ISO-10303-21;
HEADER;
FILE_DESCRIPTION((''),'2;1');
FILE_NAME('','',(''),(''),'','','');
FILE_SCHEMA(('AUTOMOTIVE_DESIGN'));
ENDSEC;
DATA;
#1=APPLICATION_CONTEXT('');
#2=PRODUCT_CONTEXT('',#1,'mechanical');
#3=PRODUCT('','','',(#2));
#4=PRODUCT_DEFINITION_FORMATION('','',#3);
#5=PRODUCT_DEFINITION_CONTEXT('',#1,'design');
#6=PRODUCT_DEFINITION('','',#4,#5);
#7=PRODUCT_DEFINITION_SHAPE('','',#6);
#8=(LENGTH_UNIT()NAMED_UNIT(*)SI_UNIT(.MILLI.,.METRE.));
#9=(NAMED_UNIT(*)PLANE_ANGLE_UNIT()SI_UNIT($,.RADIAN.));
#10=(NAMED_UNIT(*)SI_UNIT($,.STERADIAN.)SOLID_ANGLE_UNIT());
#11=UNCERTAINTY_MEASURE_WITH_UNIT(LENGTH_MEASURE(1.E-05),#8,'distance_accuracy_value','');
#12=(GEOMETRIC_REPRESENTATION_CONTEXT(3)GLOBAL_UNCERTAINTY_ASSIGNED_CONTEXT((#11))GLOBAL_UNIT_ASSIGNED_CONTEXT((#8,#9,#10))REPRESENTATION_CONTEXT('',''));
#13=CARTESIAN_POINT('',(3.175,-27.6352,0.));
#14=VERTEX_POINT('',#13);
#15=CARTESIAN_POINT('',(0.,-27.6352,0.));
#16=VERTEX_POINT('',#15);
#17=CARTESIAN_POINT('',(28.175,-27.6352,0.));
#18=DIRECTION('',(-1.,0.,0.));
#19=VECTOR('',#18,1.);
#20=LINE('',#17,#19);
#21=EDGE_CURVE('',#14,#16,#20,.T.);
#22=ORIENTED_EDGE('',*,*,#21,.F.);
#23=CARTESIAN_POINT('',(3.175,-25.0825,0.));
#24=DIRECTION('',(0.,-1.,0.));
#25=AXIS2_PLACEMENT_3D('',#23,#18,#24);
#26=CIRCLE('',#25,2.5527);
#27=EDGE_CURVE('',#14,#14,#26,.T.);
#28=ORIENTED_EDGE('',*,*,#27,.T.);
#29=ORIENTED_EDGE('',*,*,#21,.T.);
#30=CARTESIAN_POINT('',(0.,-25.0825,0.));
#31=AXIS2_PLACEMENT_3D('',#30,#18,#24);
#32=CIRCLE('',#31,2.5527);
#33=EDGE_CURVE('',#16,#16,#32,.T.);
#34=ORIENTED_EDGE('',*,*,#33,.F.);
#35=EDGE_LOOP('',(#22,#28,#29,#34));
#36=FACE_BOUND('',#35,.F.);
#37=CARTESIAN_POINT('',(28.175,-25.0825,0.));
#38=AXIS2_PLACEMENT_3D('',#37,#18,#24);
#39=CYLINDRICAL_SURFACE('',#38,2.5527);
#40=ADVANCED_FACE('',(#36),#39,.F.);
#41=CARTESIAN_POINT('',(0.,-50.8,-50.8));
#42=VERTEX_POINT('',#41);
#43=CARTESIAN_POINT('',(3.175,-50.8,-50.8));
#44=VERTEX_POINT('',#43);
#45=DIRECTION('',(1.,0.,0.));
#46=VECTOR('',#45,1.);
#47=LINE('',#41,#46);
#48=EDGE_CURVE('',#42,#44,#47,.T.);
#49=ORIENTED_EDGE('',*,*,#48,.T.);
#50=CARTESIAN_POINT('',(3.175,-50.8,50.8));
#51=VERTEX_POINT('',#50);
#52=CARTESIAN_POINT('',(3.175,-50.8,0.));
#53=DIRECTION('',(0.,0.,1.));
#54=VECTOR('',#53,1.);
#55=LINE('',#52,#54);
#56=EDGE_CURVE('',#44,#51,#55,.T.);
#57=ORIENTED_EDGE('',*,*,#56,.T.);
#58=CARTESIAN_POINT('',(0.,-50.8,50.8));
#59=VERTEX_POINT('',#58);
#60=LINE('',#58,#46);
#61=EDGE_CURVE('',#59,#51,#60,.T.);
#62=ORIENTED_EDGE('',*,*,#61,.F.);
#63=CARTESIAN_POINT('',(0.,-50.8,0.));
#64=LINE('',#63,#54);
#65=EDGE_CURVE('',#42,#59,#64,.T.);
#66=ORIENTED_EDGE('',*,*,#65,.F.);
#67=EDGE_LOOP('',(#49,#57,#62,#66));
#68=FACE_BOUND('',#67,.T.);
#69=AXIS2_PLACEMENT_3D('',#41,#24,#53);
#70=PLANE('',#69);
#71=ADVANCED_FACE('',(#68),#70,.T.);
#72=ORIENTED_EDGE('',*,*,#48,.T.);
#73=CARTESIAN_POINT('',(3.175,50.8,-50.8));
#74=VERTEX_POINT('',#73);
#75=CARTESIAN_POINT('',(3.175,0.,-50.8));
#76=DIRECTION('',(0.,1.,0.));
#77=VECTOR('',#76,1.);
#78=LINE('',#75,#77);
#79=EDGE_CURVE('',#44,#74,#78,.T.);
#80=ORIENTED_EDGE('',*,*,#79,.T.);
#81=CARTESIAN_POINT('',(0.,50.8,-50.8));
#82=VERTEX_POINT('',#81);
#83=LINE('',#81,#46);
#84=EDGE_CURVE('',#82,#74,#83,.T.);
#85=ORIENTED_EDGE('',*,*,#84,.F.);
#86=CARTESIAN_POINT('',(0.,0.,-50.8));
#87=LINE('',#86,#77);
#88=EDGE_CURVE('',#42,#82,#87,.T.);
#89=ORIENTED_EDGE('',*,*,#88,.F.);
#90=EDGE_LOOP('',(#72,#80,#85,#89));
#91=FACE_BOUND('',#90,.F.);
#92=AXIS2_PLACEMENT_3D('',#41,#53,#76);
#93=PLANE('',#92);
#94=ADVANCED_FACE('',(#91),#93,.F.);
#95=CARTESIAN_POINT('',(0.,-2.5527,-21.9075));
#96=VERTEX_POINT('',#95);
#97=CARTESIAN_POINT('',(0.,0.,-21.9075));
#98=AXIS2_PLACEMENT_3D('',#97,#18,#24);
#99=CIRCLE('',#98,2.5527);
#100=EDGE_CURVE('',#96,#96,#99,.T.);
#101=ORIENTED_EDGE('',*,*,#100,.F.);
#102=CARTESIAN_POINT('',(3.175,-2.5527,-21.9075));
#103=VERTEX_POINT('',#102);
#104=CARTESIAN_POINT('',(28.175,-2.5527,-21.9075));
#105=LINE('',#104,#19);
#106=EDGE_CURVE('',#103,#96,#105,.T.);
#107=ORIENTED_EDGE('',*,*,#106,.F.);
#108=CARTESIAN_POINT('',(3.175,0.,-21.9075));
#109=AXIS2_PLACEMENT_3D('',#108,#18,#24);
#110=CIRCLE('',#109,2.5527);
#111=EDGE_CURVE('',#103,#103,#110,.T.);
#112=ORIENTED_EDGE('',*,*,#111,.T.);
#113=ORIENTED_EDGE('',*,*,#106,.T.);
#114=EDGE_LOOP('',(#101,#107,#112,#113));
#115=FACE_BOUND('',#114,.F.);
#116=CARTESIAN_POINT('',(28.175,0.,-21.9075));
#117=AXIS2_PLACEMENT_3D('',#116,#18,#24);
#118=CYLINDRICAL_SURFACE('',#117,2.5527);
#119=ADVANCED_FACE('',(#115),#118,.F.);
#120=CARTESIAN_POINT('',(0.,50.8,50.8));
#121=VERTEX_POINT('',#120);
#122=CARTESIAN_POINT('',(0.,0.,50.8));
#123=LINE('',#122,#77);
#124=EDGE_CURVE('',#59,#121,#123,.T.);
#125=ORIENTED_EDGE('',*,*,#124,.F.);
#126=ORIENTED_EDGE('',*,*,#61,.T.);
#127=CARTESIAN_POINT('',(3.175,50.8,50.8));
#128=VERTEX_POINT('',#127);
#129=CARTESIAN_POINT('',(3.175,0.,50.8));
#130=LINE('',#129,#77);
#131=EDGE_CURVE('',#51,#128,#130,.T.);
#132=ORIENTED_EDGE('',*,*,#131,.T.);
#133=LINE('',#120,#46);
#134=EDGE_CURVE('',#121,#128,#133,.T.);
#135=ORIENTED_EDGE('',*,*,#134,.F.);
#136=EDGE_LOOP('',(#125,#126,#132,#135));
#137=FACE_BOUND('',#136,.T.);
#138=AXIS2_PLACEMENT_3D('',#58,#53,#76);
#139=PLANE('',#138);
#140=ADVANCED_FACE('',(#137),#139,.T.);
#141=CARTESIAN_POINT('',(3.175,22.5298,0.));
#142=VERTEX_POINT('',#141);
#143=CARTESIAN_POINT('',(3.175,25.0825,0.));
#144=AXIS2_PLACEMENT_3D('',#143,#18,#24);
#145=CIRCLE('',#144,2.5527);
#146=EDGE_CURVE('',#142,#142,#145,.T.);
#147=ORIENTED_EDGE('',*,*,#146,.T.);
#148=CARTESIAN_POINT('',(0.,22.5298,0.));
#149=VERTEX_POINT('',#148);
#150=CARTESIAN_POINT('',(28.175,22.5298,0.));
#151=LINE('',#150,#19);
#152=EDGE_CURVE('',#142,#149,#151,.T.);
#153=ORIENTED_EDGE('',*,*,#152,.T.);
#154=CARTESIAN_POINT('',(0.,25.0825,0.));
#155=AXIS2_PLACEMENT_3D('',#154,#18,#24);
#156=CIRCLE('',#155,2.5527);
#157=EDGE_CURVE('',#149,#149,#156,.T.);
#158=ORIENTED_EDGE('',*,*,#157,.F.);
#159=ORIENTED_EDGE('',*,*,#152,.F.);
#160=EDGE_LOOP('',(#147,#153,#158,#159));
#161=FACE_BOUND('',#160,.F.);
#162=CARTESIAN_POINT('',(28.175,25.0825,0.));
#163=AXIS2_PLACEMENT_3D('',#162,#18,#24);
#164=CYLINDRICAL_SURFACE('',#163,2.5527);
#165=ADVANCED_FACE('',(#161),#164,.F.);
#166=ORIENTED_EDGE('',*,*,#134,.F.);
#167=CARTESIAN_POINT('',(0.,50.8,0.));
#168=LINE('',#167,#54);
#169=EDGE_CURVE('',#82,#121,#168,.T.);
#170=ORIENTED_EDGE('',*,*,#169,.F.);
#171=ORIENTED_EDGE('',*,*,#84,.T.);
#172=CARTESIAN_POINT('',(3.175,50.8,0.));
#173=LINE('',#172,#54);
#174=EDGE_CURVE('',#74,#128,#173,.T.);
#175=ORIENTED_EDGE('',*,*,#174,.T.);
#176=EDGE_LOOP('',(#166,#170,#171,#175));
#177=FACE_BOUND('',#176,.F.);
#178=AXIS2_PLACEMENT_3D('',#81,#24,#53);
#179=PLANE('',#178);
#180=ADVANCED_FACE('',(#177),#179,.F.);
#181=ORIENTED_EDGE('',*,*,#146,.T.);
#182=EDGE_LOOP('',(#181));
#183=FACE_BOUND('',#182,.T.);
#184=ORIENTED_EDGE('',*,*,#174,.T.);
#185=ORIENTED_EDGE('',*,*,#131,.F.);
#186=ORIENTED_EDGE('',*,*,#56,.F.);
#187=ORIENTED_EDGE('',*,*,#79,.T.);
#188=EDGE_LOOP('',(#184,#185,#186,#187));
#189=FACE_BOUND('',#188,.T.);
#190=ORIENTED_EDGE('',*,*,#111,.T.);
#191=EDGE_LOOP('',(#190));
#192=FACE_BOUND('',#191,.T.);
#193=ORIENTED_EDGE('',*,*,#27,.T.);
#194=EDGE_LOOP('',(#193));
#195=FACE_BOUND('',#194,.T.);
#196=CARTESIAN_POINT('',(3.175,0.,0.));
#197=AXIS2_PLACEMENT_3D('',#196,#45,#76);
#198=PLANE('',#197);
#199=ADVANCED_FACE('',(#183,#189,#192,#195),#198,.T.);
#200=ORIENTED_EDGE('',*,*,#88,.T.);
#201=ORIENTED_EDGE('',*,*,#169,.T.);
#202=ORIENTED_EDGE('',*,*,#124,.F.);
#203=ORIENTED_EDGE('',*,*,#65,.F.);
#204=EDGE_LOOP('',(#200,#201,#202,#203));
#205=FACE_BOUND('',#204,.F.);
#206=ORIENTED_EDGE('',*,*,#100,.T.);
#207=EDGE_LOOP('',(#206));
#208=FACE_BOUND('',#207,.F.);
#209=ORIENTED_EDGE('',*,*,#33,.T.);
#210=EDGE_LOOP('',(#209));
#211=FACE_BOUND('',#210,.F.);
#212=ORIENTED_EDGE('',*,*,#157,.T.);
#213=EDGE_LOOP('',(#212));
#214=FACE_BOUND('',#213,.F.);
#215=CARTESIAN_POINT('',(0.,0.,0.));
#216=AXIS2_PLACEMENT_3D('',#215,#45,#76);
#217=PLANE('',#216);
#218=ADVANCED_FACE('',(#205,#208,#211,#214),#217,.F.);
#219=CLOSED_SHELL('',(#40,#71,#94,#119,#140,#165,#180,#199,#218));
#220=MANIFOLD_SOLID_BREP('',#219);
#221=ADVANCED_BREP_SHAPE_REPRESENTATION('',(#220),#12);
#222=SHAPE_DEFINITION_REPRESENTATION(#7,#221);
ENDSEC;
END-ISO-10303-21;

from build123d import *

# Parameters (mm, degrees)
F0_W     = 101.6
F0_H     = 101.6
F1_DEPTH = 3.175
F3_D     = 5.1054
F3_DEPTH = 25
F3_TIP   = 1.5338169022


# Not quite as in the source:
# - a length typed as a fraction of an inch, garbled in the dataset ("3 / 203.2 mm" for 3/8 in), is restored


with BuildPart() as f1:
    # F0 (on Right) → F1 (new body)
    with BuildSketch(Plane.YZ):
        Rectangle(F0_W, F0_H)
    extrude(amount=F1_DEPTH)

    # F3
    with Locations(Plane.YZ.offset(3.175)):
        with Locations((0, -21.9075), (-25.0825, 0), (25.0825, 0)):
            Hole(F3_D / 2, depth=F3_DEPTH)
            with Locations((0, 0, -(F3_DEPTH + F3_TIP / 2))):  # 118° drill point
                Cone(0, F3_D / 2, F3_TIP, mode=Mode.SUBTRACT)


solid = f1.part
